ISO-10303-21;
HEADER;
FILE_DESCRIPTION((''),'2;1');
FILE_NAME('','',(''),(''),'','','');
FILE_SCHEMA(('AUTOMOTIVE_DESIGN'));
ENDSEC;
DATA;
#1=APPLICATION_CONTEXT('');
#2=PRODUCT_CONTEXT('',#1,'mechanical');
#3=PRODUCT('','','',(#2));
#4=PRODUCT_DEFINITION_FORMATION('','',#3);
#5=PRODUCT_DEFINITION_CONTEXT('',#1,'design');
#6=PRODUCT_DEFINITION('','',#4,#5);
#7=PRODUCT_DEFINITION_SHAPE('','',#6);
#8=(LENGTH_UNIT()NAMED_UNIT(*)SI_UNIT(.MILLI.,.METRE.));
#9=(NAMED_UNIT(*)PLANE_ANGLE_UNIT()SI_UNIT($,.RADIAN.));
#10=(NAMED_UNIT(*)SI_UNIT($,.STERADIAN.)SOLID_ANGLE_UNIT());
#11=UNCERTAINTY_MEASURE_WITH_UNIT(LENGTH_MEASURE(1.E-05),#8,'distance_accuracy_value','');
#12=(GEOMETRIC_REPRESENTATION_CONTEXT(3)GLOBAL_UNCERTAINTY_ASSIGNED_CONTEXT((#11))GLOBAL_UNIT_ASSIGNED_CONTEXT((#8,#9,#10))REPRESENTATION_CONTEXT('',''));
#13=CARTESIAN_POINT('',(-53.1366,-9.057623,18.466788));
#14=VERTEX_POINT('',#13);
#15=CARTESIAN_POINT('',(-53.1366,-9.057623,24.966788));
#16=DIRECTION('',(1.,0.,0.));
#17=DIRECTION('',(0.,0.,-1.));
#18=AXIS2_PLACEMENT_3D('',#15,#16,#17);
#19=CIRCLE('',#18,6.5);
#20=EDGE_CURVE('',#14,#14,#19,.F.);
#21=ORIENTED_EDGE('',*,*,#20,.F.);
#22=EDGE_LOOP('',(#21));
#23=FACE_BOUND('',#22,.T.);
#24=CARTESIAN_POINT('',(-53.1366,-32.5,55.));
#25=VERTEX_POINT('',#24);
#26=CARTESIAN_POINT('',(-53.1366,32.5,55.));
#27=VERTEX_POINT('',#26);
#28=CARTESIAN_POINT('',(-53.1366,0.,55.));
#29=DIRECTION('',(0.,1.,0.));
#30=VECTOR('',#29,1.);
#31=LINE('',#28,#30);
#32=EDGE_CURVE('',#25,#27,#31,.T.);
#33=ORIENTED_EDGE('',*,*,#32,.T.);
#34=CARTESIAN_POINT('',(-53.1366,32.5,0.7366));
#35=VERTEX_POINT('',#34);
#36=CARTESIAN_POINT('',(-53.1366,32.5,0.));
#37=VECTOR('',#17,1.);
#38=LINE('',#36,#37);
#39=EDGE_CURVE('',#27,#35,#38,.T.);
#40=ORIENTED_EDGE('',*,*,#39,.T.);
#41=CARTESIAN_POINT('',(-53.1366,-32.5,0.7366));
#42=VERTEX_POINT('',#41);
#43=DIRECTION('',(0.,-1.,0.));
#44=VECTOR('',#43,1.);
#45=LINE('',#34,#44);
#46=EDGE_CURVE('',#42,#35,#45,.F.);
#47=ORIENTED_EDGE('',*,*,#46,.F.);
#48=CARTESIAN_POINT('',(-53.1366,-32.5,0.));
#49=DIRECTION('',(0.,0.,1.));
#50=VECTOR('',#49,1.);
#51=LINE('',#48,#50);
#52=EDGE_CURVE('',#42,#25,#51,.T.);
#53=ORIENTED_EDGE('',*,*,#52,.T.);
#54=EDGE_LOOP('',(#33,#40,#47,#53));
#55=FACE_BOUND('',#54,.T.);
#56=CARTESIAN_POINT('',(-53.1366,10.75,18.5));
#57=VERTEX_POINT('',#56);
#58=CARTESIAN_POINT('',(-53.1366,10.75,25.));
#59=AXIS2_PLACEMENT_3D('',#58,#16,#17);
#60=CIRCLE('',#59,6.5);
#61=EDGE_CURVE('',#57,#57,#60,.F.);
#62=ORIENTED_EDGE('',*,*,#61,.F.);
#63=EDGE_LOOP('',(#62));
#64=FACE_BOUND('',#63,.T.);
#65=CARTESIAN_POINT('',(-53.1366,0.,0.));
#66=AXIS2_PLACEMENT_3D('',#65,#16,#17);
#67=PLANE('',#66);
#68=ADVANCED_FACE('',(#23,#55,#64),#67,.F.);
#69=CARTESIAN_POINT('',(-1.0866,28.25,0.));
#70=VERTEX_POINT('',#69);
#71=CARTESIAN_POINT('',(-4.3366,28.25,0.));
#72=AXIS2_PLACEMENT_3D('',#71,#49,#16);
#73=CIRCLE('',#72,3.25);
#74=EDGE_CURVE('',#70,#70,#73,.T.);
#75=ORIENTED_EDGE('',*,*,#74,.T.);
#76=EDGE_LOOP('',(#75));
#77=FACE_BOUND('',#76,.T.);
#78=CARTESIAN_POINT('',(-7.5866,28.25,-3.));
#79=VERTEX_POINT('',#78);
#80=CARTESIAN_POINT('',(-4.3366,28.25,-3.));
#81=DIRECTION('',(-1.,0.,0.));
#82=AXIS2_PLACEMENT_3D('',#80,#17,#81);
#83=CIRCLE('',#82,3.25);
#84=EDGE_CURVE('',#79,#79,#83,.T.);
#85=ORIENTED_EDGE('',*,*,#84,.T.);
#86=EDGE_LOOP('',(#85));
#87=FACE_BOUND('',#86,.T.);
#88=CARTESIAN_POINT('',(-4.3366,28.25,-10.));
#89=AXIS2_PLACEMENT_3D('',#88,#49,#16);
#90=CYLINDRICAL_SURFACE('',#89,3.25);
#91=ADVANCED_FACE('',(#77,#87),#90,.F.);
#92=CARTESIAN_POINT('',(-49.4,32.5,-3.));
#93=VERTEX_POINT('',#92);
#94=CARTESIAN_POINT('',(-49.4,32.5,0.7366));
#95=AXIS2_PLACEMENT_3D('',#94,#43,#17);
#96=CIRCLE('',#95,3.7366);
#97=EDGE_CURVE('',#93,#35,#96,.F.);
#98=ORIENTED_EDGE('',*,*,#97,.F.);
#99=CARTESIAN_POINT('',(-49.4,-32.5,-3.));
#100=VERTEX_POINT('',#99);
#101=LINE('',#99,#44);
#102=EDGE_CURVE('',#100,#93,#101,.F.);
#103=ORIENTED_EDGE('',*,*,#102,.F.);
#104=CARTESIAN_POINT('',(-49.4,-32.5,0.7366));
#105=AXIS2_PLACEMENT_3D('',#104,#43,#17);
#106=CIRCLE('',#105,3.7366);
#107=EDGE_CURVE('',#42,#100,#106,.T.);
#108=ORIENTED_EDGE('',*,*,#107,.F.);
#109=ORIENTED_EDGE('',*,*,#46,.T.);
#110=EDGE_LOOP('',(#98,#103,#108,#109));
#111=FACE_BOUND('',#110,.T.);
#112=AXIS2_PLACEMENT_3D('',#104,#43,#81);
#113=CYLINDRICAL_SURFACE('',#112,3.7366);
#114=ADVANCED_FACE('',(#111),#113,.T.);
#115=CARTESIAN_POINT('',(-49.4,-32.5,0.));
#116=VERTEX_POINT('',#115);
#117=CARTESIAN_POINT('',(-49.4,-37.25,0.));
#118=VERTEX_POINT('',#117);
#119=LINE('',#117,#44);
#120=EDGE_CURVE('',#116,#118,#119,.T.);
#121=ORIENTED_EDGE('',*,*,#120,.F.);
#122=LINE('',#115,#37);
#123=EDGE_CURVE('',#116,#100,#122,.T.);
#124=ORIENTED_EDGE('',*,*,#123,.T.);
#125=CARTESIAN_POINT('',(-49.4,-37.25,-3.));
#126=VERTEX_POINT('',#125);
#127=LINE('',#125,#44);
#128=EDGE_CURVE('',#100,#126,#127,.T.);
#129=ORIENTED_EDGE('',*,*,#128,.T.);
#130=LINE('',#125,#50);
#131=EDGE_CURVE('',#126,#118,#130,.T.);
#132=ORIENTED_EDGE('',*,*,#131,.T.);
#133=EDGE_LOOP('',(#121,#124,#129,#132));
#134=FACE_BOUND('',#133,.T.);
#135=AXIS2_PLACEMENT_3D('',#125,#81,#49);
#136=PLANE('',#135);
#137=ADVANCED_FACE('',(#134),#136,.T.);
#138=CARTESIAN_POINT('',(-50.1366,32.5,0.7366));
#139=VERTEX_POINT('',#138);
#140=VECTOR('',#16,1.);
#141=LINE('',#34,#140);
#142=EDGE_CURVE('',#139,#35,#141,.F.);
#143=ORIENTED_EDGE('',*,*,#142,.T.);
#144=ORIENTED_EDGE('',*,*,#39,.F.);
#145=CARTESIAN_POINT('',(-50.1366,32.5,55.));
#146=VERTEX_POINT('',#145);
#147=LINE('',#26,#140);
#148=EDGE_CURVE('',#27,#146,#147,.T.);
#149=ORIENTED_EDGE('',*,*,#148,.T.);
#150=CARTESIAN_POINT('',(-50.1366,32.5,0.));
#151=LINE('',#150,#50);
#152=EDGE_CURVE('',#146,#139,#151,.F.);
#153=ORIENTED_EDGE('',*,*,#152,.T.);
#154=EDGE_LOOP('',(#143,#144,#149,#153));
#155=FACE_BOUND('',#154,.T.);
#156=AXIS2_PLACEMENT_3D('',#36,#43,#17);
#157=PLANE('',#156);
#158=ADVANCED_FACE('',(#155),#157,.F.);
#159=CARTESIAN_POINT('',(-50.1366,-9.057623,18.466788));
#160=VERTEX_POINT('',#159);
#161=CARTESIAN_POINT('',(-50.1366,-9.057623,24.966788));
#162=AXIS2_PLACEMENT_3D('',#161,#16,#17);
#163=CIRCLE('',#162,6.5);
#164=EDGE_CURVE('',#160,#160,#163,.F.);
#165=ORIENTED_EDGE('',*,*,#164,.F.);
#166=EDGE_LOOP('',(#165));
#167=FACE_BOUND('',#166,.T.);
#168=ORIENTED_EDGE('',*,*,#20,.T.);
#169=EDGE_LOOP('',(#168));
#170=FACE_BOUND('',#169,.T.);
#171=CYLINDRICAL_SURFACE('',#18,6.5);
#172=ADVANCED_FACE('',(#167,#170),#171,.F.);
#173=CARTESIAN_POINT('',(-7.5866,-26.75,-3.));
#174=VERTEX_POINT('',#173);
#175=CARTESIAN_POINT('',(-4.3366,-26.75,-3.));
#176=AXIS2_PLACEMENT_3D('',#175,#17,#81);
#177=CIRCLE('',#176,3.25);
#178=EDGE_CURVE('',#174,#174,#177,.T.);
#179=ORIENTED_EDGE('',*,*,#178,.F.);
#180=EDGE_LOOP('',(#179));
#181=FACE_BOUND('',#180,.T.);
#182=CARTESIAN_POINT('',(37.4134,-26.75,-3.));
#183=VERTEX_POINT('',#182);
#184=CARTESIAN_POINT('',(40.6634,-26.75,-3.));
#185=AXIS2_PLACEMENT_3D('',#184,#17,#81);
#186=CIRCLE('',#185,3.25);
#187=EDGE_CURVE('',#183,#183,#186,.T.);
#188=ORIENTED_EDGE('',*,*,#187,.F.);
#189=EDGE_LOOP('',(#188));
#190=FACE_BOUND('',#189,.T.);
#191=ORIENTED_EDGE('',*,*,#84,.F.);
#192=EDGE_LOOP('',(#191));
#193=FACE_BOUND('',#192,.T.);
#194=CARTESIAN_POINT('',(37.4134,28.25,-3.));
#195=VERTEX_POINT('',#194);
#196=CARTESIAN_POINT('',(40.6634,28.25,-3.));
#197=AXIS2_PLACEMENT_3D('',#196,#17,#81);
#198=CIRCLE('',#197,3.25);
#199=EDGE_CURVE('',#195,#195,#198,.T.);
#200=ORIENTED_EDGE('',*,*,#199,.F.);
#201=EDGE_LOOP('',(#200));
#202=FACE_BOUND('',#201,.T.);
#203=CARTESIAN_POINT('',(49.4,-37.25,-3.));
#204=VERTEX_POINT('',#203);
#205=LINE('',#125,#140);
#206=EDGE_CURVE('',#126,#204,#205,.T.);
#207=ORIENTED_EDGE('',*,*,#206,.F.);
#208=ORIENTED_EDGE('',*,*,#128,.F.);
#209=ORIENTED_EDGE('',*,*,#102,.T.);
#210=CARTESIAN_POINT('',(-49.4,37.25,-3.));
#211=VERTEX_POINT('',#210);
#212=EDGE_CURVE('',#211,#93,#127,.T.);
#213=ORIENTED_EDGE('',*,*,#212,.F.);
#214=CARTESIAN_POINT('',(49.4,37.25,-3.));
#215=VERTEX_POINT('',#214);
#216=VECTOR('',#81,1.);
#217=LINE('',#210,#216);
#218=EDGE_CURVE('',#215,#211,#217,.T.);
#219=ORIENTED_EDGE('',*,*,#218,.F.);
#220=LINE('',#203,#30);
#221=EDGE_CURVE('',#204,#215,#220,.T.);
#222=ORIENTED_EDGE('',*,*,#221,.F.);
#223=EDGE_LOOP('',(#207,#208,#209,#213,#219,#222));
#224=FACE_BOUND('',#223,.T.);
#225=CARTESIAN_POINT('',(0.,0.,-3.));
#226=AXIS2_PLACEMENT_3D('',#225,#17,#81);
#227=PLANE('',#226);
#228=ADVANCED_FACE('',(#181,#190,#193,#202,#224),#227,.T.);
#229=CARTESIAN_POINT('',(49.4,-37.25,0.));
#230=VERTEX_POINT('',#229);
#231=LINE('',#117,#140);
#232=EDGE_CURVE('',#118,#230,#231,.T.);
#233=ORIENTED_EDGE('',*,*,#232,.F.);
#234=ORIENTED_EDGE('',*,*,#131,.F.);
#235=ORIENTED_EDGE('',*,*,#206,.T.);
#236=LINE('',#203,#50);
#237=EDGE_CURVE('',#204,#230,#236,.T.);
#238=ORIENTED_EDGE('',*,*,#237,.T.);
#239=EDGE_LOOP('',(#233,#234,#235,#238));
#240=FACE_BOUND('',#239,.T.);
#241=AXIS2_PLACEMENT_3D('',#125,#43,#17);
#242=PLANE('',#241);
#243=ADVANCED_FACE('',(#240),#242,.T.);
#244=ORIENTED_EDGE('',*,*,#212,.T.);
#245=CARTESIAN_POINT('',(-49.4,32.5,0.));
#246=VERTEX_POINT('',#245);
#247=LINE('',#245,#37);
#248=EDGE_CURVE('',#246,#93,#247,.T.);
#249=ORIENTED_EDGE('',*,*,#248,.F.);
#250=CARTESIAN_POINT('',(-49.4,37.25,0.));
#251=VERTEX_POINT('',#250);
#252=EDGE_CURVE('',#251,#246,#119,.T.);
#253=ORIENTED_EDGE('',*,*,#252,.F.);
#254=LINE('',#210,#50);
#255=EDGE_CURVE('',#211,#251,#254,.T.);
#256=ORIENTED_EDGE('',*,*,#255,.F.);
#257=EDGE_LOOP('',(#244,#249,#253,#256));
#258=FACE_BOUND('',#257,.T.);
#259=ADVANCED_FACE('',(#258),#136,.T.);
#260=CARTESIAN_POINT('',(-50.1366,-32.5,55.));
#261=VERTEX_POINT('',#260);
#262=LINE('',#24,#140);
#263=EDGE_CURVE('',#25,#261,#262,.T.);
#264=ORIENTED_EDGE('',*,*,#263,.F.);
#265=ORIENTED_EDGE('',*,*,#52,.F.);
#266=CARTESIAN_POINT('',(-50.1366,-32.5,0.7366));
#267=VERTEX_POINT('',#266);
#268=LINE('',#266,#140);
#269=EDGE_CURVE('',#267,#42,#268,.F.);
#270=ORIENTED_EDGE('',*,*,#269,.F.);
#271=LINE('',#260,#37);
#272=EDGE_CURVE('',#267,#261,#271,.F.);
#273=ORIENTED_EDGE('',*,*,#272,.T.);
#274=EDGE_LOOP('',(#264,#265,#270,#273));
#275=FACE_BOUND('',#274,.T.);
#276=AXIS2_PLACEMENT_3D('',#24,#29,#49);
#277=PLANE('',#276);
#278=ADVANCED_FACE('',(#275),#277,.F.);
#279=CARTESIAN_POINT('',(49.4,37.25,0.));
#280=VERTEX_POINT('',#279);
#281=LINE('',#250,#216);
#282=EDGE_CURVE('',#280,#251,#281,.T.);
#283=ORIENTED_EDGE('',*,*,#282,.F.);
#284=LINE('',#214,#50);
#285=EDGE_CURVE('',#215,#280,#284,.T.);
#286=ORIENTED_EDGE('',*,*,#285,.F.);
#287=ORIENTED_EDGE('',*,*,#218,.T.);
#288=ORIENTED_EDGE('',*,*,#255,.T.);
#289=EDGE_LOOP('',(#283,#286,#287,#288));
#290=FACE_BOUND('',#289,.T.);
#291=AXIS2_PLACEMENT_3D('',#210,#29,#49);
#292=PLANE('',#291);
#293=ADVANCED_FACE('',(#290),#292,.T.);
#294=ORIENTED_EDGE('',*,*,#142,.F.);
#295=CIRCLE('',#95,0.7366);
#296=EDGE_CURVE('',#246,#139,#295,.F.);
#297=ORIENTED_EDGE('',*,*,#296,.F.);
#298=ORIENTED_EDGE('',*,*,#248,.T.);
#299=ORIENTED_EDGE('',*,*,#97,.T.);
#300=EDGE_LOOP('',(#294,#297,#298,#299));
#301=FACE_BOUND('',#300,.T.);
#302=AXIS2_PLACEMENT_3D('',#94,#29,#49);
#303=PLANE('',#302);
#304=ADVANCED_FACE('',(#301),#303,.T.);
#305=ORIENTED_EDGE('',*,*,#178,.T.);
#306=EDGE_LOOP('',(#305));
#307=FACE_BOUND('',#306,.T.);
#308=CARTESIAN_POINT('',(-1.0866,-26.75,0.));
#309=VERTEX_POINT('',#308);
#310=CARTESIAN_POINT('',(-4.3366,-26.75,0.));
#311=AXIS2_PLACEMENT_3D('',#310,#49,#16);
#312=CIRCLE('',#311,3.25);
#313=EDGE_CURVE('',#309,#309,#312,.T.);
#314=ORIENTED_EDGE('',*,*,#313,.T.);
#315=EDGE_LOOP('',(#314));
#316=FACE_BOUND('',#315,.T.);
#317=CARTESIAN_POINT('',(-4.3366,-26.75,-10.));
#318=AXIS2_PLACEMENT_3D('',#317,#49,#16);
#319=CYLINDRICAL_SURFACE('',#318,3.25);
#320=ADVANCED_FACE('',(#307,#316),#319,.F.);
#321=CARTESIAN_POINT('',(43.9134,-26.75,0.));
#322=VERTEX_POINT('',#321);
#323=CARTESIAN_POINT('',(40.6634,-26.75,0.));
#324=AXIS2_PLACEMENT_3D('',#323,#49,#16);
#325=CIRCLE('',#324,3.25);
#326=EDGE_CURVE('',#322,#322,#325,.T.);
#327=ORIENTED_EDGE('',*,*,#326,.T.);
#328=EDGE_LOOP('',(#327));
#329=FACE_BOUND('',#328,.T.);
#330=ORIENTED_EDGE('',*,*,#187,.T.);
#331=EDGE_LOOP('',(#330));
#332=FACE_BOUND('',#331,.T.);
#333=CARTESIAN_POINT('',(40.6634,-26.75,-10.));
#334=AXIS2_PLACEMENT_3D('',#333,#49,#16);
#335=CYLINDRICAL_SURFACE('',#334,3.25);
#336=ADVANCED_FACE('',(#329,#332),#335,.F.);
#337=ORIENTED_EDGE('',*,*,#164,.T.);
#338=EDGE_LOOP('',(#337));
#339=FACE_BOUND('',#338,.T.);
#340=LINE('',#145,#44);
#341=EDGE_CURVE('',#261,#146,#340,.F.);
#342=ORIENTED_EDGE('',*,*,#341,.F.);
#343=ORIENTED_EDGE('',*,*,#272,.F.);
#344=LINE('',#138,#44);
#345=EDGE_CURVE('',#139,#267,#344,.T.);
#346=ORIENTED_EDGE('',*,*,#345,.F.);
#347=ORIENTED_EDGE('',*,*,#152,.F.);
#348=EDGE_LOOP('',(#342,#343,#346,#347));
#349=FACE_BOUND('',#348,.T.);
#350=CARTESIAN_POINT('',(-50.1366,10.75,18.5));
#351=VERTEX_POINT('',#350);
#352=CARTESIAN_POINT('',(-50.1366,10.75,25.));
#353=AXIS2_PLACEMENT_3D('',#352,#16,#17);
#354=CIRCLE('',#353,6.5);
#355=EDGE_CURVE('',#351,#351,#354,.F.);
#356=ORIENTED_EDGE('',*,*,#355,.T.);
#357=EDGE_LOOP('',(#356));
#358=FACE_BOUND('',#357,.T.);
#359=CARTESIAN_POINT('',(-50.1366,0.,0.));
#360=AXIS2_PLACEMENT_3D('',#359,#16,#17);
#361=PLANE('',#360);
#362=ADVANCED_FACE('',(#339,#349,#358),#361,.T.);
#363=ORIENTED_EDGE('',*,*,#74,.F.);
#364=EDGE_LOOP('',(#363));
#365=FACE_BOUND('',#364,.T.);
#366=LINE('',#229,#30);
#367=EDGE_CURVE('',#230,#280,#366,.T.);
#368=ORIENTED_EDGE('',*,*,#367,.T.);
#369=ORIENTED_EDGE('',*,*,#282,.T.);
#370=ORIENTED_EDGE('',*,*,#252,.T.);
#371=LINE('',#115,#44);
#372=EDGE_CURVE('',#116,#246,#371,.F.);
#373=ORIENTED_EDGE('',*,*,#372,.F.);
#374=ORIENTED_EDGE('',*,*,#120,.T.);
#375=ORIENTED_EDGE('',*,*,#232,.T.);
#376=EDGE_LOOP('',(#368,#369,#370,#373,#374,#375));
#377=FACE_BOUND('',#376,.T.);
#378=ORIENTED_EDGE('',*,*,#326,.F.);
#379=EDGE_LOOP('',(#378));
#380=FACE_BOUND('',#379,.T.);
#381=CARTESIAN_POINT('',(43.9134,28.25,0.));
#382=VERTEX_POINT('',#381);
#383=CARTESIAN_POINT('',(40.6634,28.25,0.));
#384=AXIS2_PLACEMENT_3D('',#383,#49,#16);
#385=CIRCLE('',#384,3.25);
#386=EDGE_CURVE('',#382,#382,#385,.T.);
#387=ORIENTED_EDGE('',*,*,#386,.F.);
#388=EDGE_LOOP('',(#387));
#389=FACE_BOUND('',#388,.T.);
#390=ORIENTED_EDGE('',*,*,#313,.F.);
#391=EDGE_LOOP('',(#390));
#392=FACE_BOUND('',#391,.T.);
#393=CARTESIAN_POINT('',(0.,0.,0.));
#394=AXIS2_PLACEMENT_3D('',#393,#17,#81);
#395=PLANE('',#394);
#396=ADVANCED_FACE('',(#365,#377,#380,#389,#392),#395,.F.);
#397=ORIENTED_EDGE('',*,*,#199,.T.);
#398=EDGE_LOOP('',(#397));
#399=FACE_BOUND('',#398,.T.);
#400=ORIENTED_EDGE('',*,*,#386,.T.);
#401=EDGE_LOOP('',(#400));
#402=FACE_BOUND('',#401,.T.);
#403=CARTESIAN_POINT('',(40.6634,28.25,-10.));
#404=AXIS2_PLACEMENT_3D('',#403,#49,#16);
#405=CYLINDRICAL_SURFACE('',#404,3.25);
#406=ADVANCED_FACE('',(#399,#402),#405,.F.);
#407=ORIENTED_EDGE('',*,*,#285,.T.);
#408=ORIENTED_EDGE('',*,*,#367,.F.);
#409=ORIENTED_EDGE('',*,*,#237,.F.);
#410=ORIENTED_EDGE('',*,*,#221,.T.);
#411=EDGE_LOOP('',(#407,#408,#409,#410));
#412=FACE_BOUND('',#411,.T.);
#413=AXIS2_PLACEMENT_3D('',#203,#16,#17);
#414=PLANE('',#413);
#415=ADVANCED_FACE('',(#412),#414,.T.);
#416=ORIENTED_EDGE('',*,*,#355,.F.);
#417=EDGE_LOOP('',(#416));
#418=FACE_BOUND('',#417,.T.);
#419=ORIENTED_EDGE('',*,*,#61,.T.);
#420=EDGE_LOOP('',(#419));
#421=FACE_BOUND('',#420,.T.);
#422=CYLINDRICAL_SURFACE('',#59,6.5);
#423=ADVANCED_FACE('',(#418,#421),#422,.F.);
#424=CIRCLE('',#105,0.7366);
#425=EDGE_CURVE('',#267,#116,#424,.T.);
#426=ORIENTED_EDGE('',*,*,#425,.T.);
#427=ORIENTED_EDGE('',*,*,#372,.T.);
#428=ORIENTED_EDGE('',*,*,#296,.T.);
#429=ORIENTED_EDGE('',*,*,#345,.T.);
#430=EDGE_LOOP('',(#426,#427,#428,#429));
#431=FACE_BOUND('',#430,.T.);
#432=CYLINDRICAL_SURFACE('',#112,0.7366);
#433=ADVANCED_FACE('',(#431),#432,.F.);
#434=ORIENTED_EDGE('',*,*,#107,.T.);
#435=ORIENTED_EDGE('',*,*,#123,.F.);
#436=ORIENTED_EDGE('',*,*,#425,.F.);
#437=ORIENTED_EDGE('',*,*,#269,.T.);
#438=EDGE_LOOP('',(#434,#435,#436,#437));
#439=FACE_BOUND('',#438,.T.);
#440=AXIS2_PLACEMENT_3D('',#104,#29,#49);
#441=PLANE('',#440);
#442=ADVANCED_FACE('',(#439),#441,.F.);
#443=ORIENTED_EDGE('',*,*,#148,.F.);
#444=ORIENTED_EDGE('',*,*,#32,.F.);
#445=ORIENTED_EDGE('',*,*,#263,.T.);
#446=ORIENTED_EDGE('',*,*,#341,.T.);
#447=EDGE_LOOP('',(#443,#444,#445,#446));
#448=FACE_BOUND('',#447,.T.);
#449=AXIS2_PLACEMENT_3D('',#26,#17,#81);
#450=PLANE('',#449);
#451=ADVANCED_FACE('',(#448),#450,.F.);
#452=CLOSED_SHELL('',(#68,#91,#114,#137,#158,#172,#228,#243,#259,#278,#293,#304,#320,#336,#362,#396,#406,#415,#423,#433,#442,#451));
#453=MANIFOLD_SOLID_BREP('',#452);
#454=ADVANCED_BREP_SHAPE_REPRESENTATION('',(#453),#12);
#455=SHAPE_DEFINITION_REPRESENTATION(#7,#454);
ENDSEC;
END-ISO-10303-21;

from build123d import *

# Parameters (mm, degrees)
SKETCH2_W               = 98.8
SKETCH2_H               = 74.5
BASE_FLANGE1_DEPTH      = 3
KENAR_FLAN_1_DEPTH      = 65
KENAR_FLAN_1_START      = 3
KENAR_FLAN_1_PROFILE_W  = 65
KENAR_FLAN_1_PROFILE_H  = 54.2634
KENAR_FLAN_1_PROFILE_R  = 6.5
KENAR_FLAN_1_FLAT_DEPTH = 3
SKETCH10_R              = 3.25
CUT_EXTRUDE2_DEPTH      = 10


# Sheet-metal steps are written as plain solids
with BuildPart() as part:
    # Sketch2 → Base-Flange1 (new body)
    with BuildSketch(Plane.XY):
        Rectangle(SKETCH2_W, SKETCH2_H)
    extrude(amount=-BASE_FLANGE1_DEPTH)

    # Kenar-Flanş1 bend section (across the edge) → Kenar-Flanş1 (add)
    with BuildSketch(Plane(origin=(-50.1366, 32.5, 0), x_dir=(1, 0, 0), z_dir=(0, -1, 0))):
        with BuildLine():
            Line((-3, 0.7366), (0, 0.7366))
            ThreePointArc((0, 0.7366), (0.215745145, 0.215745145), (0.7366, 0))
            Line((0.7366, 0), (0.7366, -3))
            ThreePointArc((0.7366, -3), (-1.905575199, -1.905575199), (-3, 0.7366))
        make_face()
    extrude(amount=KENAR_FLAN_1_DEPTH)

    # Kenar-Flanş1 profile (on flange) → Kenar-Flanş1 flat (add)
    with BuildSketch(Plane(origin=(-50.1366, 0, 0), x_dir=(0, -1, 0), z_dir=(-1, 0, 0)).offset(KENAR_FLAN_1_START)):
        with Locations((0, 27.8683)):
            Rectangle(KENAR_FLAN_1_PROFILE_W, KENAR_FLAN_1_PROFILE_H)
        with Locations((9.057623393, 24.966787755)):
            Circle(KENAR_FLAN_1_PROFILE_R, mode=Mode.SUBTRACT)
        with Locations((-10.75, 25)):
            Circle(KENAR_FLAN_1_PROFILE_R, mode=Mode.SUBTRACT)
    extrude(amount=-KENAR_FLAN_1_FLAT_DEPTH)

    # Sketch10 → Cut-Extrude2 (cut)
    with BuildSketch(Plane.XY):
        with Locations((40.6634, -26.75)):
            Circle(SKETCH10_R)
        with Locations((-4.3366, -26.75)):
            Circle(SKETCH10_R)
        with Locations((-4.3366, 28.25)):
            Circle(SKETCH10_R)
        with Locations((40.6634, 28.25)):
            Circle(SKETCH10_R)
    extrude(amount=-CUT_EXTRUDE2_DEPTH, mode=Mode.SUBTRACT)


solid = part.part
